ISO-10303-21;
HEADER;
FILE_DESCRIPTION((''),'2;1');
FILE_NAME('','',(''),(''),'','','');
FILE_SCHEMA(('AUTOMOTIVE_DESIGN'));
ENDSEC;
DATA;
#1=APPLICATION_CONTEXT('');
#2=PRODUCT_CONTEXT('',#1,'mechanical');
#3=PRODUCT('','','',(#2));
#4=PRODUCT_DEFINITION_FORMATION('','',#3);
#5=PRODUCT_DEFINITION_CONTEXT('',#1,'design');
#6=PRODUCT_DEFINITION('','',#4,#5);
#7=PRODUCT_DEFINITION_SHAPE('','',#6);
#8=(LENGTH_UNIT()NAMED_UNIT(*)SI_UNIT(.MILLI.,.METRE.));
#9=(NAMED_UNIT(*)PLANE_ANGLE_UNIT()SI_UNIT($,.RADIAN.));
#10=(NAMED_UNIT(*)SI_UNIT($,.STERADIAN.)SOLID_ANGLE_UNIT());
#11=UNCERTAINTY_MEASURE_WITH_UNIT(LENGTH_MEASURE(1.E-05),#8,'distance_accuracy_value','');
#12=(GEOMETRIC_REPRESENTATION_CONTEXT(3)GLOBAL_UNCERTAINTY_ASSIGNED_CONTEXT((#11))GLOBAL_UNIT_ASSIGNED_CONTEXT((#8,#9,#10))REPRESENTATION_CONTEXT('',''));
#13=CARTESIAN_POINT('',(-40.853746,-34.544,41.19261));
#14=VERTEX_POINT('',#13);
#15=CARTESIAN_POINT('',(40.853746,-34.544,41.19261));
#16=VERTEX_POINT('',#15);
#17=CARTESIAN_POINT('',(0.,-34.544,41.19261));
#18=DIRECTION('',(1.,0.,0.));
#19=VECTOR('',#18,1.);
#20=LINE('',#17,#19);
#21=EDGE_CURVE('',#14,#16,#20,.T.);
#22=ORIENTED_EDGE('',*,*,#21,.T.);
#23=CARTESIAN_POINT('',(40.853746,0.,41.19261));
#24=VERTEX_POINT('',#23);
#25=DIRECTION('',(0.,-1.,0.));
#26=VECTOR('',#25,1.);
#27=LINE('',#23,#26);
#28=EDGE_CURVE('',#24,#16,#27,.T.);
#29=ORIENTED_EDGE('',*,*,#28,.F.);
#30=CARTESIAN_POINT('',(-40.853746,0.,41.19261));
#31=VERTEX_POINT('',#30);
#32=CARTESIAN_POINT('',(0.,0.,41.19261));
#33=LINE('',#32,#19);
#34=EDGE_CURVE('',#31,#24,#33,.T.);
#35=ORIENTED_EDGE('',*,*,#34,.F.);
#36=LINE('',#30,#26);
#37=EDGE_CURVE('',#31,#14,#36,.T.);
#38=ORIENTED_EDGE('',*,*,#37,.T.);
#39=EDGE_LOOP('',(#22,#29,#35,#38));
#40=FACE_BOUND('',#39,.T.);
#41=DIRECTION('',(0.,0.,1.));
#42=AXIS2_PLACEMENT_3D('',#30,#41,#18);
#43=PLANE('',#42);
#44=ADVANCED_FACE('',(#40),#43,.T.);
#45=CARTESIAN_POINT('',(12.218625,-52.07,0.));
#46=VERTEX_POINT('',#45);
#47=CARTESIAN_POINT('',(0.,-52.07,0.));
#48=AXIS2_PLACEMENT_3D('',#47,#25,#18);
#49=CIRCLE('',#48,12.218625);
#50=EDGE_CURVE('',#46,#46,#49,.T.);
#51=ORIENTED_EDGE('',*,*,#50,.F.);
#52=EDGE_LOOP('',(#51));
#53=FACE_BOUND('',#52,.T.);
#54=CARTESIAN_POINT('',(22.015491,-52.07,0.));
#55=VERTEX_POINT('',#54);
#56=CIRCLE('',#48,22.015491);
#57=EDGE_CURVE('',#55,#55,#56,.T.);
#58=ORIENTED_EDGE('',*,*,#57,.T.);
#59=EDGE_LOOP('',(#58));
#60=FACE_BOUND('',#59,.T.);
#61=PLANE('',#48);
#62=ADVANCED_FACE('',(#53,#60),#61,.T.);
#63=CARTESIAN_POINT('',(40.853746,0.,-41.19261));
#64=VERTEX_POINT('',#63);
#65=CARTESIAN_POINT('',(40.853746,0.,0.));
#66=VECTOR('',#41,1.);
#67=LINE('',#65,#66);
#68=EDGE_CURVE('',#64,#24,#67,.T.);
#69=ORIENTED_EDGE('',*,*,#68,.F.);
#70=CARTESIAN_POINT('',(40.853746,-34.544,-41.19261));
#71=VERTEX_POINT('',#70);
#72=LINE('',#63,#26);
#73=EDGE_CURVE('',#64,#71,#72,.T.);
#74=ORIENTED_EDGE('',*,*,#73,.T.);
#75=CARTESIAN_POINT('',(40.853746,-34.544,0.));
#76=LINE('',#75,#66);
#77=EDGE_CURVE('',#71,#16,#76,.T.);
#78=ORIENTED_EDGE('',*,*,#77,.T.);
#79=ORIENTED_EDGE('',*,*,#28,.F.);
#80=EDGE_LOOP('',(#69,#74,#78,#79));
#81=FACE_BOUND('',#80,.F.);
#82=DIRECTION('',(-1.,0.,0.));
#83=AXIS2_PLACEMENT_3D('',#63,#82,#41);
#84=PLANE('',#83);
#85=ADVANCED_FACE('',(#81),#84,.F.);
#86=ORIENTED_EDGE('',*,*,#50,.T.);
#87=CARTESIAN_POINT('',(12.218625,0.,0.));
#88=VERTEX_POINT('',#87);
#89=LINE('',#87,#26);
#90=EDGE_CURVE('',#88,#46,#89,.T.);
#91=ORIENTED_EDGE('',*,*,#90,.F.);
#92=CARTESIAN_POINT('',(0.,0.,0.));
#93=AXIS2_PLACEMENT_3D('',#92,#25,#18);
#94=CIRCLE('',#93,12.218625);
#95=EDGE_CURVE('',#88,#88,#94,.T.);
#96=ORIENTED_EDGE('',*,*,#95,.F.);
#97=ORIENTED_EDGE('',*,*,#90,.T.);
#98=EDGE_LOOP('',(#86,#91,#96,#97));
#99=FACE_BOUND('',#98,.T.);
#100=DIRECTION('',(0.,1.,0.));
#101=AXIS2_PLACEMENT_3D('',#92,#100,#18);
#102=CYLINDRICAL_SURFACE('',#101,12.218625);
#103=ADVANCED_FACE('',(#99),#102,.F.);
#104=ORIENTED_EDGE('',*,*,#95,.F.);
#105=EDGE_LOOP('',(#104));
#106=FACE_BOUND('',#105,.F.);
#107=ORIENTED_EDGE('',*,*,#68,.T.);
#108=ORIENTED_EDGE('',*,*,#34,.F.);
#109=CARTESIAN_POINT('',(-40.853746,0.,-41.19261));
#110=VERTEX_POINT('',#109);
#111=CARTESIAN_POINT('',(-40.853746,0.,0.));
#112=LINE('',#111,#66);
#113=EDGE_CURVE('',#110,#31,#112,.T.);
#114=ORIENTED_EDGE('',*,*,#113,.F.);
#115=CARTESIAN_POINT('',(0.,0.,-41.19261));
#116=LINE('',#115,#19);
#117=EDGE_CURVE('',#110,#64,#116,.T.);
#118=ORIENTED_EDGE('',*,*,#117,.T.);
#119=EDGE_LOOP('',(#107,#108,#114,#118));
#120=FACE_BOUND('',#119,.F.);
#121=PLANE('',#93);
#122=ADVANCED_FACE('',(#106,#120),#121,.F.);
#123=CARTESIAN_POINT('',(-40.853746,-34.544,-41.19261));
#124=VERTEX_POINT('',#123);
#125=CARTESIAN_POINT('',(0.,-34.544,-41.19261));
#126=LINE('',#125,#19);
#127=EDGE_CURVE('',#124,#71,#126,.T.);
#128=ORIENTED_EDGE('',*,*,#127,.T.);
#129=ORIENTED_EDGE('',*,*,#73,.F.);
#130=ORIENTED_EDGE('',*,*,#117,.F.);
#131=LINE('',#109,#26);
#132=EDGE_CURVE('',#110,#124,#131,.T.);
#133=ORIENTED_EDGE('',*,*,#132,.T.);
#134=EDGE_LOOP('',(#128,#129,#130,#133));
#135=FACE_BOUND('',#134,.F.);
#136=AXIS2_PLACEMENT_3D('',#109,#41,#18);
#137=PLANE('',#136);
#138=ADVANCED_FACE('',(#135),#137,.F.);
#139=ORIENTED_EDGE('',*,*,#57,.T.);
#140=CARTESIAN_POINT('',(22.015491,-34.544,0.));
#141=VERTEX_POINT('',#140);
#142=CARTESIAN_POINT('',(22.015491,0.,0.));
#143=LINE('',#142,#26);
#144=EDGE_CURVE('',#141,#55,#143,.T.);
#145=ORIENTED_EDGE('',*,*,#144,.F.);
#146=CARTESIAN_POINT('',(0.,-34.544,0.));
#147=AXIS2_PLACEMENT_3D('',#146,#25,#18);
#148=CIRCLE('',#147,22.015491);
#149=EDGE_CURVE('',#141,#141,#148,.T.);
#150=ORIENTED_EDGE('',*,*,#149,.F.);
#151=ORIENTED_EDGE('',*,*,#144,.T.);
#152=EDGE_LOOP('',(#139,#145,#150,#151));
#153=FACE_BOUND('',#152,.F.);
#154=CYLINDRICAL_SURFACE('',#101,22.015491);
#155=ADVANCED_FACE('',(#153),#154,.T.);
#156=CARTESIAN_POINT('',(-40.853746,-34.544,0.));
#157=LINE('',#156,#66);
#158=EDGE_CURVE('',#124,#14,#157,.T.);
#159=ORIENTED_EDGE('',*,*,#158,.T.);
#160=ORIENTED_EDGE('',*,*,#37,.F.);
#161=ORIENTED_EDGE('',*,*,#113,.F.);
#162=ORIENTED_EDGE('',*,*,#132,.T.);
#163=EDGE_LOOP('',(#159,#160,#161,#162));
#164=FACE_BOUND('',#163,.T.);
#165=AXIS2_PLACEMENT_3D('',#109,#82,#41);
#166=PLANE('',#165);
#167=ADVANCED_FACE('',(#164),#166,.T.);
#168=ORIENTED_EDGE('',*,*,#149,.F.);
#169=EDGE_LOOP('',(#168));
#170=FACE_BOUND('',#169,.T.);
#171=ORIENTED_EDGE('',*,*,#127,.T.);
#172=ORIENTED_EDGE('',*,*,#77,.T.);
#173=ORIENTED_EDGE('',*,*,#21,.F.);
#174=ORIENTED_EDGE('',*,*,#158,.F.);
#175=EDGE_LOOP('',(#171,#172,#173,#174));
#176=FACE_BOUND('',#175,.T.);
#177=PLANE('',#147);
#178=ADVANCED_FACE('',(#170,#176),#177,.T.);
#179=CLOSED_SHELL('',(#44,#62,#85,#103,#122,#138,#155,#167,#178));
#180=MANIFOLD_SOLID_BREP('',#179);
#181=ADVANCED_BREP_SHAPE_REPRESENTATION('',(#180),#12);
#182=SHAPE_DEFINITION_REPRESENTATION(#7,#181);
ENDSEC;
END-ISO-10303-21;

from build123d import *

# Parameters (mm, degrees)
F0_W     = 81.7074924707
F0_H     = 82.3852196336
F0_R     = 22.0154906443
F1_DEPTH = 34.544
F0_R_2   = 12.2186254277
F2_DEPTH = 52.07
F3_DEPTH = 147


# Not quite as in the source:
# - an extrude ends at something that could not be found from the text; its depth is read off the source's solid


with BuildPart() as f1:
    # F0 (on Front) → F1 (new body)
    with BuildSketch(Plane.XZ):
        Rectangle(F0_W, F0_H)
        Circle(F0_R, mode=Mode.SUBTRACT)
    extrude(amount=F1_DEPTH)

    # F0 (on Front) → F2 (join)
    with BuildSketch(Plane.XZ):
        Circle(F0_R)
        Circle(F0_R_2, mode=Mode.SUBTRACT)
    extrude(amount=F2_DEPTH)

    # F0 (on Front) → F3 (cut, through all)
    with BuildSketch(Plane.XZ):
        Circle(F0_R_2)
    extrude(amount=-F3_DEPTH, mode=Mode.SUBTRACT)


solid = f1.part
